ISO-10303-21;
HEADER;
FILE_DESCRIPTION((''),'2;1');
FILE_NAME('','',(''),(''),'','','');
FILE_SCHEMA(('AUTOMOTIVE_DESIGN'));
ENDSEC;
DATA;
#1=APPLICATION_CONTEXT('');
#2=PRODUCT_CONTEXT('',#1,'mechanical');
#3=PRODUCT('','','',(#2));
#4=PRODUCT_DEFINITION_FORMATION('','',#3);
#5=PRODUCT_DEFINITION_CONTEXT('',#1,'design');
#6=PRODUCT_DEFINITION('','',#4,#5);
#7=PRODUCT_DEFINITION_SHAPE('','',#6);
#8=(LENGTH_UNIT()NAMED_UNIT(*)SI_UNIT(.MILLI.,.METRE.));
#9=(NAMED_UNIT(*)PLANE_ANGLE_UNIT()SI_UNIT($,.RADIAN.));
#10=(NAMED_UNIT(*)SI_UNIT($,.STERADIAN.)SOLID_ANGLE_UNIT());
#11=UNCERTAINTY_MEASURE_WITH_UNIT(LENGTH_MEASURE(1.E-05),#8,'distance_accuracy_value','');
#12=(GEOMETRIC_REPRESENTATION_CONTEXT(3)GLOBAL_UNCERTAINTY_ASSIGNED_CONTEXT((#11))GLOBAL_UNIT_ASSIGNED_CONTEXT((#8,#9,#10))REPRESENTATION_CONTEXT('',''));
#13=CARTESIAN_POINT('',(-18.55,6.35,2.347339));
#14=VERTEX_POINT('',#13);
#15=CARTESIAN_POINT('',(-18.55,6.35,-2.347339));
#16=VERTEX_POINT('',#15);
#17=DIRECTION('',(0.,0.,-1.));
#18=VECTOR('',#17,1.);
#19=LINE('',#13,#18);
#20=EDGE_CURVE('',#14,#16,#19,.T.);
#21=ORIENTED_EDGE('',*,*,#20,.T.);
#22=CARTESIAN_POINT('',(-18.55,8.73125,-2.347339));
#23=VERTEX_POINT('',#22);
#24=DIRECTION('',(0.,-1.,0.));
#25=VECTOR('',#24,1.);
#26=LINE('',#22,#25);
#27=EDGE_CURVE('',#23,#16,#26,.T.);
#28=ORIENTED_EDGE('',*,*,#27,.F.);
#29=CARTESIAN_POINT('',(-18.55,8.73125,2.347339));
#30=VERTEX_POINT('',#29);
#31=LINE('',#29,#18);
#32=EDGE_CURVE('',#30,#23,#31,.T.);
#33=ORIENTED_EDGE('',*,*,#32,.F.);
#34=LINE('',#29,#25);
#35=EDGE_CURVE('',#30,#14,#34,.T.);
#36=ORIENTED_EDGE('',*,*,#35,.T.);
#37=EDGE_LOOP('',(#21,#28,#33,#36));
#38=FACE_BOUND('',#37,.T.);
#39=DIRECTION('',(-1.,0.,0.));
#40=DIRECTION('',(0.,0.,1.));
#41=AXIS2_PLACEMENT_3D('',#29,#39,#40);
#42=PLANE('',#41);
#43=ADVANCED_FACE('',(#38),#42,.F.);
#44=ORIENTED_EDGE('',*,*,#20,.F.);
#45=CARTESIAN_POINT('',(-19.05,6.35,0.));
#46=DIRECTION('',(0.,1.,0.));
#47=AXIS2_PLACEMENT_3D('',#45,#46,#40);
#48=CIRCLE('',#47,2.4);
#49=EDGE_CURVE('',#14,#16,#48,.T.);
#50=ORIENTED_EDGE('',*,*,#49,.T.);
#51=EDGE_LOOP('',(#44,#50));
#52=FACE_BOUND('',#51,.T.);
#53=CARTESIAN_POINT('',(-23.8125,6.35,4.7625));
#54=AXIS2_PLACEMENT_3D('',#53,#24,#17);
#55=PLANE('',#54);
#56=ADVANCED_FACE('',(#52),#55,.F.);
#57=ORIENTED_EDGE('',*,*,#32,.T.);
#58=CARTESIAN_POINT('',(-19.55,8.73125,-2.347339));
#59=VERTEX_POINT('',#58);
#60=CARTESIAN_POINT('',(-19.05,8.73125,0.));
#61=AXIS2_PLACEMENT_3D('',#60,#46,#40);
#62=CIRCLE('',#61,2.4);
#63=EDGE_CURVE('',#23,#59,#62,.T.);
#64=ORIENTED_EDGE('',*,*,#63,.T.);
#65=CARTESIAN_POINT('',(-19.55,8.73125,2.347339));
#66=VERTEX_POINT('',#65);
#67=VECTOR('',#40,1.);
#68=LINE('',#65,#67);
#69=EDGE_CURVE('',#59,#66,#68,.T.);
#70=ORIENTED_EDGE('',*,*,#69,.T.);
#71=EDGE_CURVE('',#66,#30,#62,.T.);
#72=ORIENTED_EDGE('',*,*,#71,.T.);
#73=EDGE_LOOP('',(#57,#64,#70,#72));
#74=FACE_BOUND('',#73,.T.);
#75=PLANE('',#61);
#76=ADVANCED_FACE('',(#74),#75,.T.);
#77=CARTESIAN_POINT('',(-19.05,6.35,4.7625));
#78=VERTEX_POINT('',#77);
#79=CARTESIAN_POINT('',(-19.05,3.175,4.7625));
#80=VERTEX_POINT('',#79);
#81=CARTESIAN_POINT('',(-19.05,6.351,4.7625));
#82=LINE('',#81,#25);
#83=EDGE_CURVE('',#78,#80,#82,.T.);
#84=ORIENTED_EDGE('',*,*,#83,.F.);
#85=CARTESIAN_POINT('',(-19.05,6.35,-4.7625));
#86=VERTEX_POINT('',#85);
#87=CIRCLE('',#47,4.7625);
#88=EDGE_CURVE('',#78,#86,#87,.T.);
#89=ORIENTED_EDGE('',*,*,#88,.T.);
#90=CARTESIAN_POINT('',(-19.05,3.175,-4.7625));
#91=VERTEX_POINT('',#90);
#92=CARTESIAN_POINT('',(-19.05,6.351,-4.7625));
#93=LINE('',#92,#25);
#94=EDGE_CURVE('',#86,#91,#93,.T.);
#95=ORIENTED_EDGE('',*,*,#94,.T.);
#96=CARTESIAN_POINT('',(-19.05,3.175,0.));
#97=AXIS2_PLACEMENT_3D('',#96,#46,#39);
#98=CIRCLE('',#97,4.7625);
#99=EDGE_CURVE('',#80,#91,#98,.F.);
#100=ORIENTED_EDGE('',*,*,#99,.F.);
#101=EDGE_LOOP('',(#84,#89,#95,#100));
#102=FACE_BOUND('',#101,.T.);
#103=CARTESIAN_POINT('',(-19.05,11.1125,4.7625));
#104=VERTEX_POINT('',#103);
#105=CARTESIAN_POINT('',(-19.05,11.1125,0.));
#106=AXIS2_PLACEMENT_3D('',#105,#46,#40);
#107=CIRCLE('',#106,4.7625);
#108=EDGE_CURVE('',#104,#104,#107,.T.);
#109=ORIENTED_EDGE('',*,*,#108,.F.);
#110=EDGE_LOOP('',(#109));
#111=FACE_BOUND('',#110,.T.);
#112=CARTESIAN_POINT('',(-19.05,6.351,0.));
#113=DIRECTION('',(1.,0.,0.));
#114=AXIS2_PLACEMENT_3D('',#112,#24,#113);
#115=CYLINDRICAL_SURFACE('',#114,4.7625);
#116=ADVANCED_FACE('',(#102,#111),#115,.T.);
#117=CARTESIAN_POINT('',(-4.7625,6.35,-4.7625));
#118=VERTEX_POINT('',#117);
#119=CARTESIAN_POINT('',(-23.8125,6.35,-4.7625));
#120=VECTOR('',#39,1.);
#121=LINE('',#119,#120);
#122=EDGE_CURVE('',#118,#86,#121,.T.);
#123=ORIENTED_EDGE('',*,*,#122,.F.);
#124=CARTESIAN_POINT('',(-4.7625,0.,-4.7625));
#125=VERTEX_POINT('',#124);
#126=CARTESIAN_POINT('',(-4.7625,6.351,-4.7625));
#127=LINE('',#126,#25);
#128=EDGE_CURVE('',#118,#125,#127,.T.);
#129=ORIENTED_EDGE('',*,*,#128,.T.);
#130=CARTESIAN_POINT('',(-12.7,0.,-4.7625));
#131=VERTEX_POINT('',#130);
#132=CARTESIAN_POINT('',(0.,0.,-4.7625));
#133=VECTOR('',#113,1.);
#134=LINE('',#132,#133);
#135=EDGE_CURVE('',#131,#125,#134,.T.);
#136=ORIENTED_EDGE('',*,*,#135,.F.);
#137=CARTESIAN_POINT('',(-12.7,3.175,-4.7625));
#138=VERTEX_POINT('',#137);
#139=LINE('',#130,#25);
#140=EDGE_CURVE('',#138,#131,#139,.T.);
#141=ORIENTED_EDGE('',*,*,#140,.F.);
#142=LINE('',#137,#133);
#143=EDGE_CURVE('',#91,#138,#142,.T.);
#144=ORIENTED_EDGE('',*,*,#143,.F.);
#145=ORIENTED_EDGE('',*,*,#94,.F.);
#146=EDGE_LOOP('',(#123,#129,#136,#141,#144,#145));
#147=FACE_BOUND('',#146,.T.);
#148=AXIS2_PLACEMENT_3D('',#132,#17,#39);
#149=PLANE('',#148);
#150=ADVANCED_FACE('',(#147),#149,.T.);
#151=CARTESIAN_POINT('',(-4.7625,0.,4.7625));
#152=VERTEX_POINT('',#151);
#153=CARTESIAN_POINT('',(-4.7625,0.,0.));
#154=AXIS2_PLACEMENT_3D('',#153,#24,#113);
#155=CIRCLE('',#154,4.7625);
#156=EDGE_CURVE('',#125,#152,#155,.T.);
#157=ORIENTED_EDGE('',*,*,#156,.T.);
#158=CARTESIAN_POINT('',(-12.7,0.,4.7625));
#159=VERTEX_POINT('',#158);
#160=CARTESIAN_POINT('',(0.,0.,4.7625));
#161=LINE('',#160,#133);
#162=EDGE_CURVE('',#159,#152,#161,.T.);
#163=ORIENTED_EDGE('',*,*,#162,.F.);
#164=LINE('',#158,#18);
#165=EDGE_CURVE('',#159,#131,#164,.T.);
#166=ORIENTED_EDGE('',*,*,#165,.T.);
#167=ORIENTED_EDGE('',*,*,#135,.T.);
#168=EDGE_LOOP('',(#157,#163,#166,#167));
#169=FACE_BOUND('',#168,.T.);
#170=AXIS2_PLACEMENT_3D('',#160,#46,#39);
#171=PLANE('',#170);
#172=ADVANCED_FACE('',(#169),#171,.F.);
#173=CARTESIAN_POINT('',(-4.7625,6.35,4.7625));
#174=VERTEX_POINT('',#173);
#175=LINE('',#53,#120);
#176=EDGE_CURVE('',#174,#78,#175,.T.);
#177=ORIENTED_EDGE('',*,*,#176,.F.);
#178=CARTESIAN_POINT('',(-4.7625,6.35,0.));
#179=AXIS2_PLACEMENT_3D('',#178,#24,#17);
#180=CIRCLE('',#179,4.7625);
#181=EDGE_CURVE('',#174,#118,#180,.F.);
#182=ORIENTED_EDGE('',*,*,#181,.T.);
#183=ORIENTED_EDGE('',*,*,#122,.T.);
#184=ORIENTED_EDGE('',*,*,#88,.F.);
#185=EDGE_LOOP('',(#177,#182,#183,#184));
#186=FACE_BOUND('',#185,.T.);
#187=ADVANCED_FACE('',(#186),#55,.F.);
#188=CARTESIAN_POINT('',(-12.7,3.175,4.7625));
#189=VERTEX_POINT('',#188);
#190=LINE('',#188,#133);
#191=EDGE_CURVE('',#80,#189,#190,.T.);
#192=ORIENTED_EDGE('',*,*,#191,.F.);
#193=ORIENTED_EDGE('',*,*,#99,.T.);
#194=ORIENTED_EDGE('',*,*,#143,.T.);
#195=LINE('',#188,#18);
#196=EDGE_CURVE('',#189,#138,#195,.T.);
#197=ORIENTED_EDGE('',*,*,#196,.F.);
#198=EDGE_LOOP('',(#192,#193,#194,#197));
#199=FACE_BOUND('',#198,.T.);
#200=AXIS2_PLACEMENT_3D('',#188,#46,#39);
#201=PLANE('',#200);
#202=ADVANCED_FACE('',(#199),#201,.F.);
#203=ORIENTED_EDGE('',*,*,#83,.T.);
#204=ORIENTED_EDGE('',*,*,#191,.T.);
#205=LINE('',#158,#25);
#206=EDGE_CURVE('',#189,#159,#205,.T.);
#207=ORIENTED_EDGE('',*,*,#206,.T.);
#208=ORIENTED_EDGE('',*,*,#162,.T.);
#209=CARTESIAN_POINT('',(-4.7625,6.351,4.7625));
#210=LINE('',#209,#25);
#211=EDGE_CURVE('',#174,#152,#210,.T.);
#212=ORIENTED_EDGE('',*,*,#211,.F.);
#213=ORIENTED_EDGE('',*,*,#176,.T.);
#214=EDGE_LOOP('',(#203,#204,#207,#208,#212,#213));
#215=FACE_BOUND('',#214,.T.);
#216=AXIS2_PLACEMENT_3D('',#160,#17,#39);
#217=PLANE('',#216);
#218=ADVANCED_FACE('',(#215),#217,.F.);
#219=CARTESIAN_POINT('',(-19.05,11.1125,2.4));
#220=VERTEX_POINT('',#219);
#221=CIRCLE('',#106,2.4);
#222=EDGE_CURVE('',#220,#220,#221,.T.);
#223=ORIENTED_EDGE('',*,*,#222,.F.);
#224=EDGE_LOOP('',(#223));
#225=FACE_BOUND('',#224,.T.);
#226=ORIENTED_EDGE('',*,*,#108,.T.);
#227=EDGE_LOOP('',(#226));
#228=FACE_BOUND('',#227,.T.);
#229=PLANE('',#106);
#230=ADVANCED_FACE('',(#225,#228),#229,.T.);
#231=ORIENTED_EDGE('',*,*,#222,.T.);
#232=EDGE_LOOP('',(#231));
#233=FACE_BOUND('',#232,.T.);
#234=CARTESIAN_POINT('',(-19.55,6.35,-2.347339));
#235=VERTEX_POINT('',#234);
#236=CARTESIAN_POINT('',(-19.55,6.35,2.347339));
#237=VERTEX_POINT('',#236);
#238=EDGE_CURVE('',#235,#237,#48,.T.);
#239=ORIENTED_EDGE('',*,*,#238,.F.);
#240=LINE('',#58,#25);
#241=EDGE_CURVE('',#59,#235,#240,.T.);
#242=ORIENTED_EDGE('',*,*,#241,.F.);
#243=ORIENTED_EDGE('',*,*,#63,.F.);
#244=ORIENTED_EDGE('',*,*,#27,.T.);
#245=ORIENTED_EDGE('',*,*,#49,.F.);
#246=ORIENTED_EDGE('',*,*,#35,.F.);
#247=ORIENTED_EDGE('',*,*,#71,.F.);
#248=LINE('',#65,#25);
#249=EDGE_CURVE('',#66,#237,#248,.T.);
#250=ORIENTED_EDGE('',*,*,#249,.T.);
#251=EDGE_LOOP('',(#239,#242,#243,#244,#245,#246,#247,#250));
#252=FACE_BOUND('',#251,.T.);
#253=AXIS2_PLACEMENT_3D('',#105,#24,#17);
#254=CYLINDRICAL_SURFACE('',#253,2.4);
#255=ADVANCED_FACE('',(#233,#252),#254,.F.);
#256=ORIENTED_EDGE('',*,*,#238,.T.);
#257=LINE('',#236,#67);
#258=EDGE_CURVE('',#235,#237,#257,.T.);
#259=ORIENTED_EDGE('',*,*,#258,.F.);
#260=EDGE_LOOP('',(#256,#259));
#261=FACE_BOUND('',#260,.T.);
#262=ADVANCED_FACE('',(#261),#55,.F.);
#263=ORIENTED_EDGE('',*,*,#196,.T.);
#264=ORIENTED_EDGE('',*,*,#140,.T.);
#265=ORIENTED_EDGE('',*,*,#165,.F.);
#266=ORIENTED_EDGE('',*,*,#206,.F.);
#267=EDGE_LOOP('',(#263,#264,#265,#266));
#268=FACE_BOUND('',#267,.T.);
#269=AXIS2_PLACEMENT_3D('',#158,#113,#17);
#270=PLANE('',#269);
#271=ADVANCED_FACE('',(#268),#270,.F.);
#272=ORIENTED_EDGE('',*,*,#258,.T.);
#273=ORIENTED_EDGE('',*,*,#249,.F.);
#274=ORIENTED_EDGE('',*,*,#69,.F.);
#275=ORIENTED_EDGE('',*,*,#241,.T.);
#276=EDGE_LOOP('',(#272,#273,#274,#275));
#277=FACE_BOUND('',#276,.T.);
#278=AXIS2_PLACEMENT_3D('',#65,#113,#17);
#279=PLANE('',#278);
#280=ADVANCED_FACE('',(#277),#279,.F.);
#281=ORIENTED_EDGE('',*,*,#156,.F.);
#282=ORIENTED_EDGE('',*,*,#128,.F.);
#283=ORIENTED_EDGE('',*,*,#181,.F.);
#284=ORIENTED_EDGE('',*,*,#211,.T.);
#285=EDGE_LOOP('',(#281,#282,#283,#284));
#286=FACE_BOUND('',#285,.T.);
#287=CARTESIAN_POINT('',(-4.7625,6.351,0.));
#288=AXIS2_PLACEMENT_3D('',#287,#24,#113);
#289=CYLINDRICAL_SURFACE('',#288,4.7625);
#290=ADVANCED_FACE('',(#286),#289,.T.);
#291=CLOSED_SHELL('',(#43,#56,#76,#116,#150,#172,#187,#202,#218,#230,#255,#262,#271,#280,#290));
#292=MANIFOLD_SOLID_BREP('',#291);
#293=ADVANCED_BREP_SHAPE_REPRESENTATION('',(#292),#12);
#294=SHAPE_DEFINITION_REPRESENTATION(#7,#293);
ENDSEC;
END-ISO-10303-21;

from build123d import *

# Parameters (mm, degrees)
BOSS_EXTRUDE1_DEPTH = 4.7625
CUT_EXTRUDE2_REACH  = 27.101
SKETCH5_R           = 4.7625
SKETCH5_R_2         = 2.4
BOSS_EXTRUDE2_DEPTH = 4.7625
BOSS_EXTRUDE3_DEPTH = 2.38125


with BuildPart() as part:
    # Sketch1 → Boss-Extrude1 (new, symmetric)
    with BuildSketch(Plane.XY):
        Polygon((0, 0), (-12.7, 0), (-12.7, 3.175), (-23.8125, 3.175), (-23.8125, 6.35), (0, 6.35), align=None)
    extrude(amount=BOSS_EXTRUDE1_DEPTH, both=True)

    # Sketch3 → Cut-Extrude2 (cut, up to next)
    with BuildSketch(Plane.XZ, mode=Mode.PRIVATE) as cut_extrude2_sk1:
        with BuildLine():
            ThreePointArc((-19.05, -4.7625), (-22.417596045, -3.367596045), (-23.8125, 0))
            Line((-23.8125, 0), (-23.8125, -4.7625))
            Line((-23.8125, -4.7625), (-19.05, -4.7625))
        make_face()
    cut_extrude2_tool1 = extrude(cut_extrude2_sk1.sketch, amount=-CUT_EXTRUDE2_REACH, mode=Mode.PRIVATE) & part.part
    # Sketch3 → Cut-Extrude2 (cut, up to next)
    with BuildSketch(Plane.XZ, mode=Mode.PRIVATE) as cut_extrude2_sk2:
        with BuildLine():
            Line((-23.8125, 4.7625), (-23.8125, 0))
            ThreePointArc((-23.8125, 0), (-22.417596045, 3.367596045), (-19.05, 4.7625))
            Line((-19.05, 4.7625), (-23.8125, 4.7625))
        make_face()
    cut_extrude2_tool2 = extrude(cut_extrude2_sk2.sketch, amount=-CUT_EXTRUDE2_REACH, mode=Mode.PRIVATE) & part.part
    # Sketch3 → Cut-Extrude2 (cut, up to next)
    with BuildSketch(Plane.XZ, mode=Mode.PRIVATE) as cut_extrude2_sk3:
        with BuildLine():
            Line((0, -4.7625), (0, 0))
            ThreePointArc((0, 0), (-1.394903955, -3.367596045), (-4.7625, -4.7625))
            Line((-4.7625, -4.7625), (0, -4.7625))
        make_face()
    cut_extrude2_tool3 = extrude(cut_extrude2_sk3.sketch, amount=-CUT_EXTRUDE2_REACH, mode=Mode.PRIVATE) & part.part
    # Sketch3 → Cut-Extrude2 (cut, up to next)
    with BuildSketch(Plane.XZ, mode=Mode.PRIVATE) as cut_extrude2_sk4:
        with BuildLine():
            Line((0, 4.7625), (-4.7625, 4.7625))
            ThreePointArc((-4.7625, 4.7625), (-1.394903955, 3.367596045), (0, 0))
            Line((0, 0), (0, 4.7625))
        make_face()
    cut_extrude2_tool4 = extrude(cut_extrude2_sk4.sketch, amount=-CUT_EXTRUDE2_REACH, mode=Mode.PRIVATE) & part.part
    add(cut_extrude2_tool1.solids().sort_by_distance((-22.74871, 0, -3.69871))[0], mode=Mode.SUBTRACT)
    add(cut_extrude2_tool2.solids().sort_by_distance((-22.74871, 0, 3.69871))[0], mode=Mode.SUBTRACT)
    add(cut_extrude2_tool3.solids().sort_by_distance((-1.06379, 0, -3.69871))[0], mode=Mode.SUBTRACT)
    add(cut_extrude2_tool4.solids().sort_by_distance((-1.06379, 0, 3.69871))[0], mode=Mode.SUBTRACT)

    # Sketch5 → Boss-Extrude2 (add)
    with BuildSketch(Plane(origin=(0, 6.35, 0), x_dir=(1, 0, 0), z_dir=(0, 1, 0))):
        with Locations((-19.05, 0)):
            Circle(SKETCH5_R)
        with Locations((-19.05, 0)):
            Circle(SKETCH5_R_2, mode=Mode.SUBTRACT)
    extrude(amount=BOSS_EXTRUDE2_DEPTH)

    # Sketch6 → Boss-Extrude3 (add)
    with BuildSketch(Plane(origin=(0, 6.35, 0), x_dir=(1, 0, 0), z_dir=(0, 1, 0))):
        with BuildLine():
            Line((-19.55, -2.347338919), (-19.55, 2.347338919))
            ThreePointArc((-19.55, 2.347338919), (-19.05, 2.4), (-18.55, 2.347338919))
            Line((-18.55, 2.347338919), (-18.55, -2.347338919))
            ThreePointArc((-18.55, -2.347338919), (-19.05, -2.4), (-19.55, -2.347338919))
        make_face()
    extrude(amount=BOSS_EXTRUDE3_DEPTH)


solid = part.part
